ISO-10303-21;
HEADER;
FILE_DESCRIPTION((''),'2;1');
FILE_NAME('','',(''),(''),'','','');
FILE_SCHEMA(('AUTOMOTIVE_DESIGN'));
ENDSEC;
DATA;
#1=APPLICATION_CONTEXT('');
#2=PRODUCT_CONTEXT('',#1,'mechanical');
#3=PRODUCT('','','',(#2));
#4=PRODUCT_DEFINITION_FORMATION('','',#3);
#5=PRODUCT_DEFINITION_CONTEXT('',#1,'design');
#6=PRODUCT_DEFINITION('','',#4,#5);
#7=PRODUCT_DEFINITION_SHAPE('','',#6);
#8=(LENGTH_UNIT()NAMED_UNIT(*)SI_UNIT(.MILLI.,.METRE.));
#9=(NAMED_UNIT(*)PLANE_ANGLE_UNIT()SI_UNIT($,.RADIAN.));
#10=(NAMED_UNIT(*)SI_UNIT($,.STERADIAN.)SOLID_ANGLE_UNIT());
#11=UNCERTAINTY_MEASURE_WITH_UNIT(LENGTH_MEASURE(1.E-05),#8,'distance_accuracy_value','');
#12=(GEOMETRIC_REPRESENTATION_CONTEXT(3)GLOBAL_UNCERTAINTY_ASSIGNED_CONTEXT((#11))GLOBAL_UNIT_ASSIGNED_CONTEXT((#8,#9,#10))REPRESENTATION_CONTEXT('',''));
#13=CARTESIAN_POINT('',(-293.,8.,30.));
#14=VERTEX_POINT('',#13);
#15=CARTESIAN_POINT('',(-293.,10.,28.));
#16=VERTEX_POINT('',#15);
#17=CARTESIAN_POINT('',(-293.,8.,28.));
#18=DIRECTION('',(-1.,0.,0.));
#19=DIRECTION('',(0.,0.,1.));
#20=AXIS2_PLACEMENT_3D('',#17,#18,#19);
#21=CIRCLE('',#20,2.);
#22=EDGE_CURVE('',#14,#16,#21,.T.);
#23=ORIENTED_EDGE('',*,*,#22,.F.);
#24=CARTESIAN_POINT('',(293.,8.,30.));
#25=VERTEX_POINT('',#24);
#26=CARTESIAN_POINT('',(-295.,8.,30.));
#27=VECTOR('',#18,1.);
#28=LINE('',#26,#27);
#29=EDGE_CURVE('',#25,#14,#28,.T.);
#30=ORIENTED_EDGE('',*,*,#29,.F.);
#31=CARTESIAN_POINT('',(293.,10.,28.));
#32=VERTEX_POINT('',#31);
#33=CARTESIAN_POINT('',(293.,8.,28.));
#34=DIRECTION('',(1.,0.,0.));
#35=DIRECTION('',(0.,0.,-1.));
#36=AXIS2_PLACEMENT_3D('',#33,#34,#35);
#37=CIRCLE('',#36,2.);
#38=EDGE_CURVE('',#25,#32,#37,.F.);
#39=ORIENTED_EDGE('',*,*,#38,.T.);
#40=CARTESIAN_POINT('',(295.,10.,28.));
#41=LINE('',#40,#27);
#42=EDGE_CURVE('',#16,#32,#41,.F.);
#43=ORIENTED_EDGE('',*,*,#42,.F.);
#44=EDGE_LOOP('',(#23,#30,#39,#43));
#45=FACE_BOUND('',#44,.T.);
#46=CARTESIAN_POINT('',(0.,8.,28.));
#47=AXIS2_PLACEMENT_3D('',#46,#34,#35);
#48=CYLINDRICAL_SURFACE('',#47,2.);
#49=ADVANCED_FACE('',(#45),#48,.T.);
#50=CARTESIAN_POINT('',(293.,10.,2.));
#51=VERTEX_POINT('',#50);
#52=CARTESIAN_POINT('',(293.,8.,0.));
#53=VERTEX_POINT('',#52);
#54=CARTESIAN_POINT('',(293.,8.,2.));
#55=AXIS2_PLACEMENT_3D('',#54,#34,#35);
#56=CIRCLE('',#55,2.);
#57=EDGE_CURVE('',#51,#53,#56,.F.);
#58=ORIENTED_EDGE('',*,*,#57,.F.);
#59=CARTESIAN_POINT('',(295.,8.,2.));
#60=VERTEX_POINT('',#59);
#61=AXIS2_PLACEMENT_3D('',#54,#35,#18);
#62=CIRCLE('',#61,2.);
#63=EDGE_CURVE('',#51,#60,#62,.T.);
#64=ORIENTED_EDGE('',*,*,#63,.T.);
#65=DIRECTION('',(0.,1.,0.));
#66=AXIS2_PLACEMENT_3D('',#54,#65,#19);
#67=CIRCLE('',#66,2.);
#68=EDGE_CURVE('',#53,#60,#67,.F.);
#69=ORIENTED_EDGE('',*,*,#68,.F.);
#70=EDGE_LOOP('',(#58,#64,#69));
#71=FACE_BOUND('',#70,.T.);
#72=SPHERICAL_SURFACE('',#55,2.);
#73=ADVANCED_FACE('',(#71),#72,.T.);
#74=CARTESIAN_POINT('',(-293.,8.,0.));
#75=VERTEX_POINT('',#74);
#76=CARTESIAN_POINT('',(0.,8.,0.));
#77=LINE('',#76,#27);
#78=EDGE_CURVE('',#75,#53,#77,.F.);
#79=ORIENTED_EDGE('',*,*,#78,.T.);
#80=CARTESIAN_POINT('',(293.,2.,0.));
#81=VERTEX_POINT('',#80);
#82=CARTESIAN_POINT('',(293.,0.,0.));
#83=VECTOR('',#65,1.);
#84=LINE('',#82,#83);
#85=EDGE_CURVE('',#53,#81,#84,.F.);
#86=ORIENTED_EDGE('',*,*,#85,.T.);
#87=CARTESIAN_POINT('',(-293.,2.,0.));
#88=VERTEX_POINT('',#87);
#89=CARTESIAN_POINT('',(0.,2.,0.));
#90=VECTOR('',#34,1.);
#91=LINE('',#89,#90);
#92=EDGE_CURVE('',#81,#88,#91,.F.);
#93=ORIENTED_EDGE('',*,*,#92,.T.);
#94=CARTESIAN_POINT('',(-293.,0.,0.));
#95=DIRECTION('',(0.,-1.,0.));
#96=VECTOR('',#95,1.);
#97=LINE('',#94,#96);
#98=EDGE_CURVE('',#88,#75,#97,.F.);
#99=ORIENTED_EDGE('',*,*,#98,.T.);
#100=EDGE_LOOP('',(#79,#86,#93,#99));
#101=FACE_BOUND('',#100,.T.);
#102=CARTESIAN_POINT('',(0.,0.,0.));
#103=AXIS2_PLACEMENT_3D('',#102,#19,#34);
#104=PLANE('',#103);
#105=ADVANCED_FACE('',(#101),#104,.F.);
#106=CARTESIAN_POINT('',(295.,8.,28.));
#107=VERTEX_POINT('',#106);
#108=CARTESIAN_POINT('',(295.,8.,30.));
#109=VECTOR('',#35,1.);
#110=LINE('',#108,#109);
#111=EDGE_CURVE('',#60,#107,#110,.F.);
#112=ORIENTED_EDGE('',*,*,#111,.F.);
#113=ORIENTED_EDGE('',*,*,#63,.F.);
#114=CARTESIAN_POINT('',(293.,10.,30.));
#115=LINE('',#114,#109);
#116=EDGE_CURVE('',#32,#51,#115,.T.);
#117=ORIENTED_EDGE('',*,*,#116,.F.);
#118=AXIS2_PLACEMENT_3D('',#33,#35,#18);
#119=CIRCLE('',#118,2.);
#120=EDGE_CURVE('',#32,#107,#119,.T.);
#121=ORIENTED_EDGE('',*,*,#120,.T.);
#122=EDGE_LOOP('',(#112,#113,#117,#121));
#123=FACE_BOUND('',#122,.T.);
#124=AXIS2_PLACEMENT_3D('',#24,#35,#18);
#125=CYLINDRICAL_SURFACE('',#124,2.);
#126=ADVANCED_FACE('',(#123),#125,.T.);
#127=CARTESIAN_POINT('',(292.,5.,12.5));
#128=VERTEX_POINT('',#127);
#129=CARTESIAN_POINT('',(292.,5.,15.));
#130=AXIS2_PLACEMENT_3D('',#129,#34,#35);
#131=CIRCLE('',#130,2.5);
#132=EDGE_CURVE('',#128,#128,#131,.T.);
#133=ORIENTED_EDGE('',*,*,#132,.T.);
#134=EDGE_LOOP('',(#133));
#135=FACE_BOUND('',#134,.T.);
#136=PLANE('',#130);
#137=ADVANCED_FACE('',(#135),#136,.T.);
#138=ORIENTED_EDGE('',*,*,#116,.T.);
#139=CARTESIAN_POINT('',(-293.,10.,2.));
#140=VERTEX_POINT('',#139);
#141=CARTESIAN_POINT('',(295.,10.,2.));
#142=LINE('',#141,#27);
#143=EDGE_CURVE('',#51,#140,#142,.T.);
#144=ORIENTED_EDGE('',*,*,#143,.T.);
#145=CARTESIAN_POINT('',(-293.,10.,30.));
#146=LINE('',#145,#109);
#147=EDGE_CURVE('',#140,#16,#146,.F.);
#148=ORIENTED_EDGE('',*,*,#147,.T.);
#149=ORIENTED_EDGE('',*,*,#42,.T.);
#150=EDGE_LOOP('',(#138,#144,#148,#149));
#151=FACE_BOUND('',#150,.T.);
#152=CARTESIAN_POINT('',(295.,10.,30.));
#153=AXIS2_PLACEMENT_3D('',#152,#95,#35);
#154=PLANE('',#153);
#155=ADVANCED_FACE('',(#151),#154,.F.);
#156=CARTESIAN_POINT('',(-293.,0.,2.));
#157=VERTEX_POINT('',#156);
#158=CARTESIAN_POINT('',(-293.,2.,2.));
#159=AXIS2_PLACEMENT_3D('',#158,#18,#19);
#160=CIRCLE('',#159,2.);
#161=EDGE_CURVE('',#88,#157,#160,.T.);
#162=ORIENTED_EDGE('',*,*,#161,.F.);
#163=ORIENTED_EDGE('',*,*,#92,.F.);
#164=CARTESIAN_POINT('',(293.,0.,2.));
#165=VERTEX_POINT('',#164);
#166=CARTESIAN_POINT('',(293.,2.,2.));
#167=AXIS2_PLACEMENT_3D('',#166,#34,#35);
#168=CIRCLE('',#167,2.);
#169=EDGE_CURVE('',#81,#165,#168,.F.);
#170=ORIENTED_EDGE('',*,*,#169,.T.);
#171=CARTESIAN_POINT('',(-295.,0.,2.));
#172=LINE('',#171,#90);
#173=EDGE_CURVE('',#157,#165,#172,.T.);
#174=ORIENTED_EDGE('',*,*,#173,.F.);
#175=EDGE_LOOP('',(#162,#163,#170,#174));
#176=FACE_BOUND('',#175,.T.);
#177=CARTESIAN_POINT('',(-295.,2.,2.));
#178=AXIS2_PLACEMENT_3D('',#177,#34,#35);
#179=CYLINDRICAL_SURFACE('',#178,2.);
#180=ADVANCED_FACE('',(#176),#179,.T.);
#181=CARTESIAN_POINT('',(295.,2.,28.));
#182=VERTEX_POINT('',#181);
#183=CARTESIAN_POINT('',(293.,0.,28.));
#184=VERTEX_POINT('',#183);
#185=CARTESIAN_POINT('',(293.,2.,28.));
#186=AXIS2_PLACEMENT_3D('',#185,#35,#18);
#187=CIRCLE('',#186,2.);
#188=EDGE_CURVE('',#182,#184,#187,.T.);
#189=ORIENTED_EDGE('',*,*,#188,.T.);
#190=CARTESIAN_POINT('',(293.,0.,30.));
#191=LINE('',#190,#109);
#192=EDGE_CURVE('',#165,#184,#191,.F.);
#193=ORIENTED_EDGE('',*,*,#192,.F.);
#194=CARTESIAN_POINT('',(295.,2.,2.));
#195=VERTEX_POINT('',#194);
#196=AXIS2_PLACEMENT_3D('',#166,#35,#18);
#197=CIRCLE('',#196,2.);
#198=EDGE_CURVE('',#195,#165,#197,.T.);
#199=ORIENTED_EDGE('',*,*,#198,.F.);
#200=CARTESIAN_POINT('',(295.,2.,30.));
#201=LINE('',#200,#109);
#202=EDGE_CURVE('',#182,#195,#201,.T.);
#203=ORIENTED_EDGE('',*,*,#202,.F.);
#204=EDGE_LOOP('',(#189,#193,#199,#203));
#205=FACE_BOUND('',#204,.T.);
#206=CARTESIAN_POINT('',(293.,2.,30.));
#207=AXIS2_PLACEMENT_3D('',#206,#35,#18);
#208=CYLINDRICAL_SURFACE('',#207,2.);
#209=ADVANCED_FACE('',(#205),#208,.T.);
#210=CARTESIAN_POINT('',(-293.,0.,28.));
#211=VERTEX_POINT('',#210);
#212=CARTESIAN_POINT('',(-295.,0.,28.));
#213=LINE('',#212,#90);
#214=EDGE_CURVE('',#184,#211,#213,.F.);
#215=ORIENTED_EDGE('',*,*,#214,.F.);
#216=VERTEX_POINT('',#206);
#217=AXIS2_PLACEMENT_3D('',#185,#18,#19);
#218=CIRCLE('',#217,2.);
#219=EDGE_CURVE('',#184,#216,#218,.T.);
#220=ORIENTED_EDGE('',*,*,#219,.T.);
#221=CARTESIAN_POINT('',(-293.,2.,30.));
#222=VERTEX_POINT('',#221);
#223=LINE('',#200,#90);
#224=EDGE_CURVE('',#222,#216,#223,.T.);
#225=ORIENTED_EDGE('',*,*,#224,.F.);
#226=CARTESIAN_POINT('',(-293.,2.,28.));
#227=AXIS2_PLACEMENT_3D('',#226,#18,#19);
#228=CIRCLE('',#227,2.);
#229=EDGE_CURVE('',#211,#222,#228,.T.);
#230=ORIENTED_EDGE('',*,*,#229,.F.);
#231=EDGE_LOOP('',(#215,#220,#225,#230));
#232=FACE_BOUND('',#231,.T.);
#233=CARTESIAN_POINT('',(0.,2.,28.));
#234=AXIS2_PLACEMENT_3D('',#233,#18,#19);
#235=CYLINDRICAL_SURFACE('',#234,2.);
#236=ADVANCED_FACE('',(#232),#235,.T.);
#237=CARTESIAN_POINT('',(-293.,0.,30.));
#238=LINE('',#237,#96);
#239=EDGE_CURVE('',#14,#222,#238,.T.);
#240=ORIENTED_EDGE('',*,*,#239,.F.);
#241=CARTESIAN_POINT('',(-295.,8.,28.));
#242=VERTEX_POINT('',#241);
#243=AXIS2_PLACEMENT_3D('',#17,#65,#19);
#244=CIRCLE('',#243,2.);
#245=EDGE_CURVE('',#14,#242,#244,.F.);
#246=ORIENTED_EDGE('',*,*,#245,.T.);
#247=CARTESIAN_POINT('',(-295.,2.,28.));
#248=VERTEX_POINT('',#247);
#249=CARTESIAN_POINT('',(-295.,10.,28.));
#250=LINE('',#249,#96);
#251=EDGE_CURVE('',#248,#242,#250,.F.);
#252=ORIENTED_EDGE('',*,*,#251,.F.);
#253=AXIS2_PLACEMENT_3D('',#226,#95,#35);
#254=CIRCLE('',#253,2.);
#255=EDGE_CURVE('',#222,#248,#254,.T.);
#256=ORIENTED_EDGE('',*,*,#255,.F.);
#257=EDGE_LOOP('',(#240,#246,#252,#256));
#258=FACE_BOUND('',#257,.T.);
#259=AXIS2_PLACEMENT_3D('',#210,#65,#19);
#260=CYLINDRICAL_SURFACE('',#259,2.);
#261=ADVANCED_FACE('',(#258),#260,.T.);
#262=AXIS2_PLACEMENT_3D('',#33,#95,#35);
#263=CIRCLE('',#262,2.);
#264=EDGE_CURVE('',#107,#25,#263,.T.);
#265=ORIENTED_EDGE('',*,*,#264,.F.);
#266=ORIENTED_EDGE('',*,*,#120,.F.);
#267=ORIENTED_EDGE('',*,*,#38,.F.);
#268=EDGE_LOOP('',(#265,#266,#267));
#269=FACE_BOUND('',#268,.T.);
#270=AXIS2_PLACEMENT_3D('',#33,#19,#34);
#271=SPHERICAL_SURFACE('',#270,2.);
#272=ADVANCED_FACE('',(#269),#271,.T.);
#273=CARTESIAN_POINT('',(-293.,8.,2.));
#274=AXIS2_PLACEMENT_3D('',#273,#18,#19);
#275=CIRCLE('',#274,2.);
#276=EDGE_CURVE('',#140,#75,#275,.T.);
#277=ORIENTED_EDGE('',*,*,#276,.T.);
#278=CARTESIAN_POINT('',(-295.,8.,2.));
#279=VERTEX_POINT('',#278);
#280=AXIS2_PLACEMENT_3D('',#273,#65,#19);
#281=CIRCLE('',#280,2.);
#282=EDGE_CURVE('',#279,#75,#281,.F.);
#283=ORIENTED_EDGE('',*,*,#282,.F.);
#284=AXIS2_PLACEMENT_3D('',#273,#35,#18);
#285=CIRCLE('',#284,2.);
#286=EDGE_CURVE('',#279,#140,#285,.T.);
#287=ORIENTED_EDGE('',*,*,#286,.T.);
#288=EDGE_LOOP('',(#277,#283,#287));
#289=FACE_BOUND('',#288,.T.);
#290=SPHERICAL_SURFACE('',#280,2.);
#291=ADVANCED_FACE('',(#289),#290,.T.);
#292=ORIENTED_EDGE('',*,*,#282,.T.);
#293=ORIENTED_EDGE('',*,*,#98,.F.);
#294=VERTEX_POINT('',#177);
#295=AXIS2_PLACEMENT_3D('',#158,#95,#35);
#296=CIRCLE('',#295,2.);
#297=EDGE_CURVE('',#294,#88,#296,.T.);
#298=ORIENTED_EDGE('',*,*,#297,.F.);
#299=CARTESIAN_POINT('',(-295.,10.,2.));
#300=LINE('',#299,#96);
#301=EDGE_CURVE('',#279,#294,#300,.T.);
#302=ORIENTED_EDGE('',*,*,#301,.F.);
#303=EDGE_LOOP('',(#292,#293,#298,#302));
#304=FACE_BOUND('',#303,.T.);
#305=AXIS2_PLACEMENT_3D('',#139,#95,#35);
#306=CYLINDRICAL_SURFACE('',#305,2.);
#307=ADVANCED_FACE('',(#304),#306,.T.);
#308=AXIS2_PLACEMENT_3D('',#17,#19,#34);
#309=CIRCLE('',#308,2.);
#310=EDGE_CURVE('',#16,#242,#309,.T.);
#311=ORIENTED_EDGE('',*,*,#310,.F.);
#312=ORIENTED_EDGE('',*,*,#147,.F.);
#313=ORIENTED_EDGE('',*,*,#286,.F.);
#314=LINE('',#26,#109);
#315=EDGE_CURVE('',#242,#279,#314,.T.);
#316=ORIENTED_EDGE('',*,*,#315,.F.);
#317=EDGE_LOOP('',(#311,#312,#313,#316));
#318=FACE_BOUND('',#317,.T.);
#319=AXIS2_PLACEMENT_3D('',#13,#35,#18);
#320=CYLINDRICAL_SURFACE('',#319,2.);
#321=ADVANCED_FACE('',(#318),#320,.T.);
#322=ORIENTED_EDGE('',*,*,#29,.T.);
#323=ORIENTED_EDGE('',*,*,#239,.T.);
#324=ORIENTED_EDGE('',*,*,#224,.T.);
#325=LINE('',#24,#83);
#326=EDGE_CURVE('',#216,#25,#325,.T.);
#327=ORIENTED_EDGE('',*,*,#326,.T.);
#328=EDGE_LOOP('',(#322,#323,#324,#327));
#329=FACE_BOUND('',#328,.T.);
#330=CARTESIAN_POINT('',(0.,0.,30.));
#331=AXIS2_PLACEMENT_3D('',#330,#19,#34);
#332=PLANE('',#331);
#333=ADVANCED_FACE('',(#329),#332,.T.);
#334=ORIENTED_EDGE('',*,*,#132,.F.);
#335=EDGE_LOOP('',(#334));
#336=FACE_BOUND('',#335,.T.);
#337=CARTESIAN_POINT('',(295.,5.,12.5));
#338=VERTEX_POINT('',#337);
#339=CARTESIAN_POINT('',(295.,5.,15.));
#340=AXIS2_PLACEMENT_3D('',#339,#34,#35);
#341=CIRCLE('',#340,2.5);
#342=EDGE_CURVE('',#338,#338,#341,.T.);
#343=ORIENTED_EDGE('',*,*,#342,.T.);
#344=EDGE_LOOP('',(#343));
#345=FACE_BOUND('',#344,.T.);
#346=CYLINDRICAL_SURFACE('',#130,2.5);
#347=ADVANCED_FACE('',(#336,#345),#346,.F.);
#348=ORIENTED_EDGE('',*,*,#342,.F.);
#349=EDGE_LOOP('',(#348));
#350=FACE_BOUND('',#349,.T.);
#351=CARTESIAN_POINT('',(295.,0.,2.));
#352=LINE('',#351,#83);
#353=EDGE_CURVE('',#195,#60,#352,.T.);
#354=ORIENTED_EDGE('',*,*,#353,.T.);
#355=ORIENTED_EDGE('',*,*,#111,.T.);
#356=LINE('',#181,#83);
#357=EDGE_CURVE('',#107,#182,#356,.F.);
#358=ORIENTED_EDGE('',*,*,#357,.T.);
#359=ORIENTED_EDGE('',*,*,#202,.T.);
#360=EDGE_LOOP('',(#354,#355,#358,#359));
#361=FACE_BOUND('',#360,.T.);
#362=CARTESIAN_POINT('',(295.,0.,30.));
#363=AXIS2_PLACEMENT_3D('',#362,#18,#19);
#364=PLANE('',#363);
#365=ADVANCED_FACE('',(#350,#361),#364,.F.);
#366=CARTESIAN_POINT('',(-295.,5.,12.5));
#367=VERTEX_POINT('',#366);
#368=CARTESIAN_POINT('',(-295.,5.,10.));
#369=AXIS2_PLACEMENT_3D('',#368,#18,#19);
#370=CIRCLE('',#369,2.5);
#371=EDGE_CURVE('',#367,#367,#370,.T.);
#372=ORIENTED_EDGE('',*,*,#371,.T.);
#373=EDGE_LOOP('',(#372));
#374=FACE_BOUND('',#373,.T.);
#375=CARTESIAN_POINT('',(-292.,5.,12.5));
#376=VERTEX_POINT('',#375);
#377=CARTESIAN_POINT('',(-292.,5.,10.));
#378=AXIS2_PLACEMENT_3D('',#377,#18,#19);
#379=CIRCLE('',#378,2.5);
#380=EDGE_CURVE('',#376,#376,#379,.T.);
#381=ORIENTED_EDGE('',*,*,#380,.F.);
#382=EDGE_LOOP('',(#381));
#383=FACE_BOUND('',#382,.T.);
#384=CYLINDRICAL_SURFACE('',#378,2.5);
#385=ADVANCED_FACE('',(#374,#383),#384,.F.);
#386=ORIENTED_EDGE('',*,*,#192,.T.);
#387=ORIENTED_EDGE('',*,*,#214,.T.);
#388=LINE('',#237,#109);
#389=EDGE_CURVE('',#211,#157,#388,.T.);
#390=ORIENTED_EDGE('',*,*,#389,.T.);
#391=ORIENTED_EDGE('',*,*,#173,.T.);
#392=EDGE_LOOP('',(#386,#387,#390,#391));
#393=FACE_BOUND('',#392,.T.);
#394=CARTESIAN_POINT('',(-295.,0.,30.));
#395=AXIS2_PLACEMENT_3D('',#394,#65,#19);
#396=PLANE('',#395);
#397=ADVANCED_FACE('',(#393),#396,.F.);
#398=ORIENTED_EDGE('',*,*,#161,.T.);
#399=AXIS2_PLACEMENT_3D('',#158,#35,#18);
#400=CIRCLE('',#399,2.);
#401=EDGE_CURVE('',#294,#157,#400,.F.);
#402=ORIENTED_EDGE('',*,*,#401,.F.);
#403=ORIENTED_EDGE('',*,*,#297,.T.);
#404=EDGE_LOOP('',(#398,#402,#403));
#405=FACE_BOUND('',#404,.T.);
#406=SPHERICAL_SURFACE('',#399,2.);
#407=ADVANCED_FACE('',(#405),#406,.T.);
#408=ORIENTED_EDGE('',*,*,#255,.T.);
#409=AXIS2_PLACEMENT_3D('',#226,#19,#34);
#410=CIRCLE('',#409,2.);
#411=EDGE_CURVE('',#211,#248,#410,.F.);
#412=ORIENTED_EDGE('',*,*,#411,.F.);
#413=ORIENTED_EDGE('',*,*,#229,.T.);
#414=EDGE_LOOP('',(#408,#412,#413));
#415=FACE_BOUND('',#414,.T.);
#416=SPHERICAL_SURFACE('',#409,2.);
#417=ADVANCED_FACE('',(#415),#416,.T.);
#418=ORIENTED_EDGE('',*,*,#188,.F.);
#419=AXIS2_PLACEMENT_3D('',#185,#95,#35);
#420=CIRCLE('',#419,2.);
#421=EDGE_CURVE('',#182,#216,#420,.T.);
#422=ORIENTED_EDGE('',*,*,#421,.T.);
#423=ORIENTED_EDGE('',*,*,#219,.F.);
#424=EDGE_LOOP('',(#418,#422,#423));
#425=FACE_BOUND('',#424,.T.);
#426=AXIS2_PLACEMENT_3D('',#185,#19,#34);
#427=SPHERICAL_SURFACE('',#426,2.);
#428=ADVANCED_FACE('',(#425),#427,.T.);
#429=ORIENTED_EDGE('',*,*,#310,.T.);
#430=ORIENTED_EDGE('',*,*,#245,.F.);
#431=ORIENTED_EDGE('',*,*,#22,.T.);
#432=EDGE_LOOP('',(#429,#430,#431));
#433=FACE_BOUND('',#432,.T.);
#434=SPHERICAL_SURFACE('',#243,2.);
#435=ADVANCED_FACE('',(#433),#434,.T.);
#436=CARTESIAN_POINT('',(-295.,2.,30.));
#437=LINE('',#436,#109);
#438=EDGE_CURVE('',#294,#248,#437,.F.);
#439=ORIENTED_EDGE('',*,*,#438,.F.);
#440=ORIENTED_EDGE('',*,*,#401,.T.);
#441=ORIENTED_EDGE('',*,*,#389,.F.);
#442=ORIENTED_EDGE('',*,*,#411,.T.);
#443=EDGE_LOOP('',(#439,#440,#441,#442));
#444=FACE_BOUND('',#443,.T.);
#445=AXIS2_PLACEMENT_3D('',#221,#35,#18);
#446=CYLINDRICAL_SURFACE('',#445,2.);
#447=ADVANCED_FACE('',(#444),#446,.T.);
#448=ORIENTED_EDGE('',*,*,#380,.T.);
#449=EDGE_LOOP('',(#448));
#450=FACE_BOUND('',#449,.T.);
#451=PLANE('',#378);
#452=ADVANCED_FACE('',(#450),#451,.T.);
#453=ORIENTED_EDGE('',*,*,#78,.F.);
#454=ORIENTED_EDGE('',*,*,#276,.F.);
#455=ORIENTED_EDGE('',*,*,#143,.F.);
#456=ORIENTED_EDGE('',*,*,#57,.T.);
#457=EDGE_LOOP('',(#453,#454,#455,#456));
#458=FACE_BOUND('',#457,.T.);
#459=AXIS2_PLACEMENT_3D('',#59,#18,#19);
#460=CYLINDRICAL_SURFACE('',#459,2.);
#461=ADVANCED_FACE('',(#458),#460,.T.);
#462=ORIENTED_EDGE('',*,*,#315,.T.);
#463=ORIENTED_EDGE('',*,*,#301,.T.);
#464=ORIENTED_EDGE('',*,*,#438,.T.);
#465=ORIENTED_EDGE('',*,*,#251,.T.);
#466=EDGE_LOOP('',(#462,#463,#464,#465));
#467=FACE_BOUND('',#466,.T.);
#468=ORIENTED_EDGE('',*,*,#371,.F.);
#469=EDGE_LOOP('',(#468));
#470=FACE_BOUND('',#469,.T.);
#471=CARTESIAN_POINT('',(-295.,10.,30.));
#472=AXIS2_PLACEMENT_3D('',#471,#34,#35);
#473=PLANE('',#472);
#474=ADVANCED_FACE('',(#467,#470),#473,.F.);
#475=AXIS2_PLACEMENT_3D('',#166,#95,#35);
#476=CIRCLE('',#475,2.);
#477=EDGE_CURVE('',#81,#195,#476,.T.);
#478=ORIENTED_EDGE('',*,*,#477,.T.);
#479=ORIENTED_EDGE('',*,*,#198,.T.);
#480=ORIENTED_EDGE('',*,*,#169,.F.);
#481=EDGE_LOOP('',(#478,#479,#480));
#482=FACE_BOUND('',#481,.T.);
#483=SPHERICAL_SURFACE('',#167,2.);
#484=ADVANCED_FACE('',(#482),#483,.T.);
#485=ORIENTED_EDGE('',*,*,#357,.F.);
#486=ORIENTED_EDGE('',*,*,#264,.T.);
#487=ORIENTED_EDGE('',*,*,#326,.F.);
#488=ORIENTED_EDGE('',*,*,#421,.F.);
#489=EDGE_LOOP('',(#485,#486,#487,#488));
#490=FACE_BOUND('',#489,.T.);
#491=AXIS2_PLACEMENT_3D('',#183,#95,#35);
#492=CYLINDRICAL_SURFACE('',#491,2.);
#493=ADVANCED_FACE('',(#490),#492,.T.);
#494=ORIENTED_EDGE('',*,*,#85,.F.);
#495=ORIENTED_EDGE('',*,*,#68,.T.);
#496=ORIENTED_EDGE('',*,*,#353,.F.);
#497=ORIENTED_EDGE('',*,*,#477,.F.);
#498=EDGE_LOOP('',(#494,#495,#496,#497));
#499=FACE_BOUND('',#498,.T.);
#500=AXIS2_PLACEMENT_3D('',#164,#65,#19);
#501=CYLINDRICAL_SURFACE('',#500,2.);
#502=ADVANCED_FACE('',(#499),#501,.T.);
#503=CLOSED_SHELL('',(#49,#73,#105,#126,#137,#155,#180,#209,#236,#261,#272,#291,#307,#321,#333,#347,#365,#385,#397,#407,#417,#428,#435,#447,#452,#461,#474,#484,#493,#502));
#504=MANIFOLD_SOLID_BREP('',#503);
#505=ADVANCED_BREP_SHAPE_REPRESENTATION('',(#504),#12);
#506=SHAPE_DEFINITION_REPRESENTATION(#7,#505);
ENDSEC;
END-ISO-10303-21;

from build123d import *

# Parameters (mm, degrees)
SKETCH1_W           = 590
SKETCH1_H           = 10
BOSS_EXTRUDE1_DEPTH = 30
FILLET1_R           = 2
FILLET2_R           = 2
SKETCH5_R           = 2.5
CUT_EXTRUDE7_DEPTH  = 3
SKETCH6_R           = 2.5
CUT_EXTRUDE8_DEPTH  = 3


with BuildPart() as part:
    # Sketch1 → Boss-Extrude1 (new body)
    with BuildSketch(Plane.XY):
        with Locations((0, 5)):
            Rectangle(SKETCH1_W, SKETCH1_H)
    extrude(amount=BOSS_EXTRUDE1_DEPTH)

    # Fillet1
    fillet1_edges = [part.edges().sort_by_distance(p)[0] for p in [
        (0, 10, 30),
        (-295, 5, 30),
        (0, 10, 0),
        (295, 5, 0),
        (0, 0, 0),
        (-295, 5, 0),
        (-295, 10, 15),
        (295, 10, 15),
        (295, 0, 15),
        (-295, 0, 15),
        (0, 0, 30),
    ]]
    fillet(fillet1_edges, radius=FILLET1_R)

    # Fillet2
    # the kernel refuses this fillet: 2 mm, written as the material it takes off along each edge
    with BuildSketch(Plane(origin=(293, 8, 28), x_dir=(0, 0, 1), z_dir=(1, 0, 0))) as fillet2_piece_1_section:
        Polygon((0, 0), (FILLET2_R, 0), (FILLET2_R, -FILLET2_R), (0, -FILLET2_R), align=None)
    fillet2_piece_1 = extrude(amount=FILLET2_R, mode=Mode.PRIVATE)
    fillet2_piece_1 = fillet2_piece_1 - Plane(origin=(293, 8, 28), x_dir=(0, -0.7071067811865475, -0.7071067811865475), z_dir=(1, 0, 0)) * Sphere(FILLET2_R, mode=Mode.PRIVATE)
    add(fillet2_piece_1, mode=Mode.SUBTRACT)
    with BuildSketch(Plane(origin=(293, 2, 28), x_dir=(0, 0, 1), z_dir=(1, 0, 0))) as fillet2_piece_2_section:
        Polygon((0, 0), (FILLET2_R, 0), (FILLET2_R, FILLET2_R), (0, FILLET2_R), align=None)
    fillet2_piece_2 = extrude(amount=FILLET2_R, mode=Mode.PRIVATE)
    fillet2_piece_2 = fillet2_piece_2 - Plane(origin=(293, 2, 28), x_dir=(0, 0.7071067811865475, -0.7071067811865475), z_dir=(1, 0, 0)) * Sphere(FILLET2_R, mode=Mode.PRIVATE)
    add(fillet2_piece_2, mode=Mode.SUBTRACT)
    with BuildSketch(Plane(origin=(295, 2, 30), x_dir=(0, 0, -1), z_dir=(0, 1, 0))) as fillet2_piece_3:
        with BuildLine():
            CenterArc((FILLET2_R, FILLET2_R), FILLET2_R, 180, 90)
            Line((0, FILLET2_R), (0, 0))
            Line((0, 0), (FILLET2_R, 0))
        make_face()
    extrude(amount=6, mode=Mode.SUBTRACT)

    # Sketch5 → Cut-Extrude7 (cut)
    with BuildSketch(Plane.ZY.offset(295)):
        with Locations((10, 5)):
            Circle(SKETCH5_R)
    extrude(amount=-CUT_EXTRUDE7_DEPTH, mode=Mode.SUBTRACT)

    # Sketch6 → Cut-Extrude8 (cut)
    with BuildSketch(Plane(origin=(295, 0, 0), x_dir=(0, 0, -1), z_dir=(1, 0, 0))):
        with Locations((-15, 5)):
            Circle(SKETCH6_R)
    extrude(amount=-CUT_EXTRUDE8_DEPTH, mode=Mode.SUBTRACT)


solid = part.part
